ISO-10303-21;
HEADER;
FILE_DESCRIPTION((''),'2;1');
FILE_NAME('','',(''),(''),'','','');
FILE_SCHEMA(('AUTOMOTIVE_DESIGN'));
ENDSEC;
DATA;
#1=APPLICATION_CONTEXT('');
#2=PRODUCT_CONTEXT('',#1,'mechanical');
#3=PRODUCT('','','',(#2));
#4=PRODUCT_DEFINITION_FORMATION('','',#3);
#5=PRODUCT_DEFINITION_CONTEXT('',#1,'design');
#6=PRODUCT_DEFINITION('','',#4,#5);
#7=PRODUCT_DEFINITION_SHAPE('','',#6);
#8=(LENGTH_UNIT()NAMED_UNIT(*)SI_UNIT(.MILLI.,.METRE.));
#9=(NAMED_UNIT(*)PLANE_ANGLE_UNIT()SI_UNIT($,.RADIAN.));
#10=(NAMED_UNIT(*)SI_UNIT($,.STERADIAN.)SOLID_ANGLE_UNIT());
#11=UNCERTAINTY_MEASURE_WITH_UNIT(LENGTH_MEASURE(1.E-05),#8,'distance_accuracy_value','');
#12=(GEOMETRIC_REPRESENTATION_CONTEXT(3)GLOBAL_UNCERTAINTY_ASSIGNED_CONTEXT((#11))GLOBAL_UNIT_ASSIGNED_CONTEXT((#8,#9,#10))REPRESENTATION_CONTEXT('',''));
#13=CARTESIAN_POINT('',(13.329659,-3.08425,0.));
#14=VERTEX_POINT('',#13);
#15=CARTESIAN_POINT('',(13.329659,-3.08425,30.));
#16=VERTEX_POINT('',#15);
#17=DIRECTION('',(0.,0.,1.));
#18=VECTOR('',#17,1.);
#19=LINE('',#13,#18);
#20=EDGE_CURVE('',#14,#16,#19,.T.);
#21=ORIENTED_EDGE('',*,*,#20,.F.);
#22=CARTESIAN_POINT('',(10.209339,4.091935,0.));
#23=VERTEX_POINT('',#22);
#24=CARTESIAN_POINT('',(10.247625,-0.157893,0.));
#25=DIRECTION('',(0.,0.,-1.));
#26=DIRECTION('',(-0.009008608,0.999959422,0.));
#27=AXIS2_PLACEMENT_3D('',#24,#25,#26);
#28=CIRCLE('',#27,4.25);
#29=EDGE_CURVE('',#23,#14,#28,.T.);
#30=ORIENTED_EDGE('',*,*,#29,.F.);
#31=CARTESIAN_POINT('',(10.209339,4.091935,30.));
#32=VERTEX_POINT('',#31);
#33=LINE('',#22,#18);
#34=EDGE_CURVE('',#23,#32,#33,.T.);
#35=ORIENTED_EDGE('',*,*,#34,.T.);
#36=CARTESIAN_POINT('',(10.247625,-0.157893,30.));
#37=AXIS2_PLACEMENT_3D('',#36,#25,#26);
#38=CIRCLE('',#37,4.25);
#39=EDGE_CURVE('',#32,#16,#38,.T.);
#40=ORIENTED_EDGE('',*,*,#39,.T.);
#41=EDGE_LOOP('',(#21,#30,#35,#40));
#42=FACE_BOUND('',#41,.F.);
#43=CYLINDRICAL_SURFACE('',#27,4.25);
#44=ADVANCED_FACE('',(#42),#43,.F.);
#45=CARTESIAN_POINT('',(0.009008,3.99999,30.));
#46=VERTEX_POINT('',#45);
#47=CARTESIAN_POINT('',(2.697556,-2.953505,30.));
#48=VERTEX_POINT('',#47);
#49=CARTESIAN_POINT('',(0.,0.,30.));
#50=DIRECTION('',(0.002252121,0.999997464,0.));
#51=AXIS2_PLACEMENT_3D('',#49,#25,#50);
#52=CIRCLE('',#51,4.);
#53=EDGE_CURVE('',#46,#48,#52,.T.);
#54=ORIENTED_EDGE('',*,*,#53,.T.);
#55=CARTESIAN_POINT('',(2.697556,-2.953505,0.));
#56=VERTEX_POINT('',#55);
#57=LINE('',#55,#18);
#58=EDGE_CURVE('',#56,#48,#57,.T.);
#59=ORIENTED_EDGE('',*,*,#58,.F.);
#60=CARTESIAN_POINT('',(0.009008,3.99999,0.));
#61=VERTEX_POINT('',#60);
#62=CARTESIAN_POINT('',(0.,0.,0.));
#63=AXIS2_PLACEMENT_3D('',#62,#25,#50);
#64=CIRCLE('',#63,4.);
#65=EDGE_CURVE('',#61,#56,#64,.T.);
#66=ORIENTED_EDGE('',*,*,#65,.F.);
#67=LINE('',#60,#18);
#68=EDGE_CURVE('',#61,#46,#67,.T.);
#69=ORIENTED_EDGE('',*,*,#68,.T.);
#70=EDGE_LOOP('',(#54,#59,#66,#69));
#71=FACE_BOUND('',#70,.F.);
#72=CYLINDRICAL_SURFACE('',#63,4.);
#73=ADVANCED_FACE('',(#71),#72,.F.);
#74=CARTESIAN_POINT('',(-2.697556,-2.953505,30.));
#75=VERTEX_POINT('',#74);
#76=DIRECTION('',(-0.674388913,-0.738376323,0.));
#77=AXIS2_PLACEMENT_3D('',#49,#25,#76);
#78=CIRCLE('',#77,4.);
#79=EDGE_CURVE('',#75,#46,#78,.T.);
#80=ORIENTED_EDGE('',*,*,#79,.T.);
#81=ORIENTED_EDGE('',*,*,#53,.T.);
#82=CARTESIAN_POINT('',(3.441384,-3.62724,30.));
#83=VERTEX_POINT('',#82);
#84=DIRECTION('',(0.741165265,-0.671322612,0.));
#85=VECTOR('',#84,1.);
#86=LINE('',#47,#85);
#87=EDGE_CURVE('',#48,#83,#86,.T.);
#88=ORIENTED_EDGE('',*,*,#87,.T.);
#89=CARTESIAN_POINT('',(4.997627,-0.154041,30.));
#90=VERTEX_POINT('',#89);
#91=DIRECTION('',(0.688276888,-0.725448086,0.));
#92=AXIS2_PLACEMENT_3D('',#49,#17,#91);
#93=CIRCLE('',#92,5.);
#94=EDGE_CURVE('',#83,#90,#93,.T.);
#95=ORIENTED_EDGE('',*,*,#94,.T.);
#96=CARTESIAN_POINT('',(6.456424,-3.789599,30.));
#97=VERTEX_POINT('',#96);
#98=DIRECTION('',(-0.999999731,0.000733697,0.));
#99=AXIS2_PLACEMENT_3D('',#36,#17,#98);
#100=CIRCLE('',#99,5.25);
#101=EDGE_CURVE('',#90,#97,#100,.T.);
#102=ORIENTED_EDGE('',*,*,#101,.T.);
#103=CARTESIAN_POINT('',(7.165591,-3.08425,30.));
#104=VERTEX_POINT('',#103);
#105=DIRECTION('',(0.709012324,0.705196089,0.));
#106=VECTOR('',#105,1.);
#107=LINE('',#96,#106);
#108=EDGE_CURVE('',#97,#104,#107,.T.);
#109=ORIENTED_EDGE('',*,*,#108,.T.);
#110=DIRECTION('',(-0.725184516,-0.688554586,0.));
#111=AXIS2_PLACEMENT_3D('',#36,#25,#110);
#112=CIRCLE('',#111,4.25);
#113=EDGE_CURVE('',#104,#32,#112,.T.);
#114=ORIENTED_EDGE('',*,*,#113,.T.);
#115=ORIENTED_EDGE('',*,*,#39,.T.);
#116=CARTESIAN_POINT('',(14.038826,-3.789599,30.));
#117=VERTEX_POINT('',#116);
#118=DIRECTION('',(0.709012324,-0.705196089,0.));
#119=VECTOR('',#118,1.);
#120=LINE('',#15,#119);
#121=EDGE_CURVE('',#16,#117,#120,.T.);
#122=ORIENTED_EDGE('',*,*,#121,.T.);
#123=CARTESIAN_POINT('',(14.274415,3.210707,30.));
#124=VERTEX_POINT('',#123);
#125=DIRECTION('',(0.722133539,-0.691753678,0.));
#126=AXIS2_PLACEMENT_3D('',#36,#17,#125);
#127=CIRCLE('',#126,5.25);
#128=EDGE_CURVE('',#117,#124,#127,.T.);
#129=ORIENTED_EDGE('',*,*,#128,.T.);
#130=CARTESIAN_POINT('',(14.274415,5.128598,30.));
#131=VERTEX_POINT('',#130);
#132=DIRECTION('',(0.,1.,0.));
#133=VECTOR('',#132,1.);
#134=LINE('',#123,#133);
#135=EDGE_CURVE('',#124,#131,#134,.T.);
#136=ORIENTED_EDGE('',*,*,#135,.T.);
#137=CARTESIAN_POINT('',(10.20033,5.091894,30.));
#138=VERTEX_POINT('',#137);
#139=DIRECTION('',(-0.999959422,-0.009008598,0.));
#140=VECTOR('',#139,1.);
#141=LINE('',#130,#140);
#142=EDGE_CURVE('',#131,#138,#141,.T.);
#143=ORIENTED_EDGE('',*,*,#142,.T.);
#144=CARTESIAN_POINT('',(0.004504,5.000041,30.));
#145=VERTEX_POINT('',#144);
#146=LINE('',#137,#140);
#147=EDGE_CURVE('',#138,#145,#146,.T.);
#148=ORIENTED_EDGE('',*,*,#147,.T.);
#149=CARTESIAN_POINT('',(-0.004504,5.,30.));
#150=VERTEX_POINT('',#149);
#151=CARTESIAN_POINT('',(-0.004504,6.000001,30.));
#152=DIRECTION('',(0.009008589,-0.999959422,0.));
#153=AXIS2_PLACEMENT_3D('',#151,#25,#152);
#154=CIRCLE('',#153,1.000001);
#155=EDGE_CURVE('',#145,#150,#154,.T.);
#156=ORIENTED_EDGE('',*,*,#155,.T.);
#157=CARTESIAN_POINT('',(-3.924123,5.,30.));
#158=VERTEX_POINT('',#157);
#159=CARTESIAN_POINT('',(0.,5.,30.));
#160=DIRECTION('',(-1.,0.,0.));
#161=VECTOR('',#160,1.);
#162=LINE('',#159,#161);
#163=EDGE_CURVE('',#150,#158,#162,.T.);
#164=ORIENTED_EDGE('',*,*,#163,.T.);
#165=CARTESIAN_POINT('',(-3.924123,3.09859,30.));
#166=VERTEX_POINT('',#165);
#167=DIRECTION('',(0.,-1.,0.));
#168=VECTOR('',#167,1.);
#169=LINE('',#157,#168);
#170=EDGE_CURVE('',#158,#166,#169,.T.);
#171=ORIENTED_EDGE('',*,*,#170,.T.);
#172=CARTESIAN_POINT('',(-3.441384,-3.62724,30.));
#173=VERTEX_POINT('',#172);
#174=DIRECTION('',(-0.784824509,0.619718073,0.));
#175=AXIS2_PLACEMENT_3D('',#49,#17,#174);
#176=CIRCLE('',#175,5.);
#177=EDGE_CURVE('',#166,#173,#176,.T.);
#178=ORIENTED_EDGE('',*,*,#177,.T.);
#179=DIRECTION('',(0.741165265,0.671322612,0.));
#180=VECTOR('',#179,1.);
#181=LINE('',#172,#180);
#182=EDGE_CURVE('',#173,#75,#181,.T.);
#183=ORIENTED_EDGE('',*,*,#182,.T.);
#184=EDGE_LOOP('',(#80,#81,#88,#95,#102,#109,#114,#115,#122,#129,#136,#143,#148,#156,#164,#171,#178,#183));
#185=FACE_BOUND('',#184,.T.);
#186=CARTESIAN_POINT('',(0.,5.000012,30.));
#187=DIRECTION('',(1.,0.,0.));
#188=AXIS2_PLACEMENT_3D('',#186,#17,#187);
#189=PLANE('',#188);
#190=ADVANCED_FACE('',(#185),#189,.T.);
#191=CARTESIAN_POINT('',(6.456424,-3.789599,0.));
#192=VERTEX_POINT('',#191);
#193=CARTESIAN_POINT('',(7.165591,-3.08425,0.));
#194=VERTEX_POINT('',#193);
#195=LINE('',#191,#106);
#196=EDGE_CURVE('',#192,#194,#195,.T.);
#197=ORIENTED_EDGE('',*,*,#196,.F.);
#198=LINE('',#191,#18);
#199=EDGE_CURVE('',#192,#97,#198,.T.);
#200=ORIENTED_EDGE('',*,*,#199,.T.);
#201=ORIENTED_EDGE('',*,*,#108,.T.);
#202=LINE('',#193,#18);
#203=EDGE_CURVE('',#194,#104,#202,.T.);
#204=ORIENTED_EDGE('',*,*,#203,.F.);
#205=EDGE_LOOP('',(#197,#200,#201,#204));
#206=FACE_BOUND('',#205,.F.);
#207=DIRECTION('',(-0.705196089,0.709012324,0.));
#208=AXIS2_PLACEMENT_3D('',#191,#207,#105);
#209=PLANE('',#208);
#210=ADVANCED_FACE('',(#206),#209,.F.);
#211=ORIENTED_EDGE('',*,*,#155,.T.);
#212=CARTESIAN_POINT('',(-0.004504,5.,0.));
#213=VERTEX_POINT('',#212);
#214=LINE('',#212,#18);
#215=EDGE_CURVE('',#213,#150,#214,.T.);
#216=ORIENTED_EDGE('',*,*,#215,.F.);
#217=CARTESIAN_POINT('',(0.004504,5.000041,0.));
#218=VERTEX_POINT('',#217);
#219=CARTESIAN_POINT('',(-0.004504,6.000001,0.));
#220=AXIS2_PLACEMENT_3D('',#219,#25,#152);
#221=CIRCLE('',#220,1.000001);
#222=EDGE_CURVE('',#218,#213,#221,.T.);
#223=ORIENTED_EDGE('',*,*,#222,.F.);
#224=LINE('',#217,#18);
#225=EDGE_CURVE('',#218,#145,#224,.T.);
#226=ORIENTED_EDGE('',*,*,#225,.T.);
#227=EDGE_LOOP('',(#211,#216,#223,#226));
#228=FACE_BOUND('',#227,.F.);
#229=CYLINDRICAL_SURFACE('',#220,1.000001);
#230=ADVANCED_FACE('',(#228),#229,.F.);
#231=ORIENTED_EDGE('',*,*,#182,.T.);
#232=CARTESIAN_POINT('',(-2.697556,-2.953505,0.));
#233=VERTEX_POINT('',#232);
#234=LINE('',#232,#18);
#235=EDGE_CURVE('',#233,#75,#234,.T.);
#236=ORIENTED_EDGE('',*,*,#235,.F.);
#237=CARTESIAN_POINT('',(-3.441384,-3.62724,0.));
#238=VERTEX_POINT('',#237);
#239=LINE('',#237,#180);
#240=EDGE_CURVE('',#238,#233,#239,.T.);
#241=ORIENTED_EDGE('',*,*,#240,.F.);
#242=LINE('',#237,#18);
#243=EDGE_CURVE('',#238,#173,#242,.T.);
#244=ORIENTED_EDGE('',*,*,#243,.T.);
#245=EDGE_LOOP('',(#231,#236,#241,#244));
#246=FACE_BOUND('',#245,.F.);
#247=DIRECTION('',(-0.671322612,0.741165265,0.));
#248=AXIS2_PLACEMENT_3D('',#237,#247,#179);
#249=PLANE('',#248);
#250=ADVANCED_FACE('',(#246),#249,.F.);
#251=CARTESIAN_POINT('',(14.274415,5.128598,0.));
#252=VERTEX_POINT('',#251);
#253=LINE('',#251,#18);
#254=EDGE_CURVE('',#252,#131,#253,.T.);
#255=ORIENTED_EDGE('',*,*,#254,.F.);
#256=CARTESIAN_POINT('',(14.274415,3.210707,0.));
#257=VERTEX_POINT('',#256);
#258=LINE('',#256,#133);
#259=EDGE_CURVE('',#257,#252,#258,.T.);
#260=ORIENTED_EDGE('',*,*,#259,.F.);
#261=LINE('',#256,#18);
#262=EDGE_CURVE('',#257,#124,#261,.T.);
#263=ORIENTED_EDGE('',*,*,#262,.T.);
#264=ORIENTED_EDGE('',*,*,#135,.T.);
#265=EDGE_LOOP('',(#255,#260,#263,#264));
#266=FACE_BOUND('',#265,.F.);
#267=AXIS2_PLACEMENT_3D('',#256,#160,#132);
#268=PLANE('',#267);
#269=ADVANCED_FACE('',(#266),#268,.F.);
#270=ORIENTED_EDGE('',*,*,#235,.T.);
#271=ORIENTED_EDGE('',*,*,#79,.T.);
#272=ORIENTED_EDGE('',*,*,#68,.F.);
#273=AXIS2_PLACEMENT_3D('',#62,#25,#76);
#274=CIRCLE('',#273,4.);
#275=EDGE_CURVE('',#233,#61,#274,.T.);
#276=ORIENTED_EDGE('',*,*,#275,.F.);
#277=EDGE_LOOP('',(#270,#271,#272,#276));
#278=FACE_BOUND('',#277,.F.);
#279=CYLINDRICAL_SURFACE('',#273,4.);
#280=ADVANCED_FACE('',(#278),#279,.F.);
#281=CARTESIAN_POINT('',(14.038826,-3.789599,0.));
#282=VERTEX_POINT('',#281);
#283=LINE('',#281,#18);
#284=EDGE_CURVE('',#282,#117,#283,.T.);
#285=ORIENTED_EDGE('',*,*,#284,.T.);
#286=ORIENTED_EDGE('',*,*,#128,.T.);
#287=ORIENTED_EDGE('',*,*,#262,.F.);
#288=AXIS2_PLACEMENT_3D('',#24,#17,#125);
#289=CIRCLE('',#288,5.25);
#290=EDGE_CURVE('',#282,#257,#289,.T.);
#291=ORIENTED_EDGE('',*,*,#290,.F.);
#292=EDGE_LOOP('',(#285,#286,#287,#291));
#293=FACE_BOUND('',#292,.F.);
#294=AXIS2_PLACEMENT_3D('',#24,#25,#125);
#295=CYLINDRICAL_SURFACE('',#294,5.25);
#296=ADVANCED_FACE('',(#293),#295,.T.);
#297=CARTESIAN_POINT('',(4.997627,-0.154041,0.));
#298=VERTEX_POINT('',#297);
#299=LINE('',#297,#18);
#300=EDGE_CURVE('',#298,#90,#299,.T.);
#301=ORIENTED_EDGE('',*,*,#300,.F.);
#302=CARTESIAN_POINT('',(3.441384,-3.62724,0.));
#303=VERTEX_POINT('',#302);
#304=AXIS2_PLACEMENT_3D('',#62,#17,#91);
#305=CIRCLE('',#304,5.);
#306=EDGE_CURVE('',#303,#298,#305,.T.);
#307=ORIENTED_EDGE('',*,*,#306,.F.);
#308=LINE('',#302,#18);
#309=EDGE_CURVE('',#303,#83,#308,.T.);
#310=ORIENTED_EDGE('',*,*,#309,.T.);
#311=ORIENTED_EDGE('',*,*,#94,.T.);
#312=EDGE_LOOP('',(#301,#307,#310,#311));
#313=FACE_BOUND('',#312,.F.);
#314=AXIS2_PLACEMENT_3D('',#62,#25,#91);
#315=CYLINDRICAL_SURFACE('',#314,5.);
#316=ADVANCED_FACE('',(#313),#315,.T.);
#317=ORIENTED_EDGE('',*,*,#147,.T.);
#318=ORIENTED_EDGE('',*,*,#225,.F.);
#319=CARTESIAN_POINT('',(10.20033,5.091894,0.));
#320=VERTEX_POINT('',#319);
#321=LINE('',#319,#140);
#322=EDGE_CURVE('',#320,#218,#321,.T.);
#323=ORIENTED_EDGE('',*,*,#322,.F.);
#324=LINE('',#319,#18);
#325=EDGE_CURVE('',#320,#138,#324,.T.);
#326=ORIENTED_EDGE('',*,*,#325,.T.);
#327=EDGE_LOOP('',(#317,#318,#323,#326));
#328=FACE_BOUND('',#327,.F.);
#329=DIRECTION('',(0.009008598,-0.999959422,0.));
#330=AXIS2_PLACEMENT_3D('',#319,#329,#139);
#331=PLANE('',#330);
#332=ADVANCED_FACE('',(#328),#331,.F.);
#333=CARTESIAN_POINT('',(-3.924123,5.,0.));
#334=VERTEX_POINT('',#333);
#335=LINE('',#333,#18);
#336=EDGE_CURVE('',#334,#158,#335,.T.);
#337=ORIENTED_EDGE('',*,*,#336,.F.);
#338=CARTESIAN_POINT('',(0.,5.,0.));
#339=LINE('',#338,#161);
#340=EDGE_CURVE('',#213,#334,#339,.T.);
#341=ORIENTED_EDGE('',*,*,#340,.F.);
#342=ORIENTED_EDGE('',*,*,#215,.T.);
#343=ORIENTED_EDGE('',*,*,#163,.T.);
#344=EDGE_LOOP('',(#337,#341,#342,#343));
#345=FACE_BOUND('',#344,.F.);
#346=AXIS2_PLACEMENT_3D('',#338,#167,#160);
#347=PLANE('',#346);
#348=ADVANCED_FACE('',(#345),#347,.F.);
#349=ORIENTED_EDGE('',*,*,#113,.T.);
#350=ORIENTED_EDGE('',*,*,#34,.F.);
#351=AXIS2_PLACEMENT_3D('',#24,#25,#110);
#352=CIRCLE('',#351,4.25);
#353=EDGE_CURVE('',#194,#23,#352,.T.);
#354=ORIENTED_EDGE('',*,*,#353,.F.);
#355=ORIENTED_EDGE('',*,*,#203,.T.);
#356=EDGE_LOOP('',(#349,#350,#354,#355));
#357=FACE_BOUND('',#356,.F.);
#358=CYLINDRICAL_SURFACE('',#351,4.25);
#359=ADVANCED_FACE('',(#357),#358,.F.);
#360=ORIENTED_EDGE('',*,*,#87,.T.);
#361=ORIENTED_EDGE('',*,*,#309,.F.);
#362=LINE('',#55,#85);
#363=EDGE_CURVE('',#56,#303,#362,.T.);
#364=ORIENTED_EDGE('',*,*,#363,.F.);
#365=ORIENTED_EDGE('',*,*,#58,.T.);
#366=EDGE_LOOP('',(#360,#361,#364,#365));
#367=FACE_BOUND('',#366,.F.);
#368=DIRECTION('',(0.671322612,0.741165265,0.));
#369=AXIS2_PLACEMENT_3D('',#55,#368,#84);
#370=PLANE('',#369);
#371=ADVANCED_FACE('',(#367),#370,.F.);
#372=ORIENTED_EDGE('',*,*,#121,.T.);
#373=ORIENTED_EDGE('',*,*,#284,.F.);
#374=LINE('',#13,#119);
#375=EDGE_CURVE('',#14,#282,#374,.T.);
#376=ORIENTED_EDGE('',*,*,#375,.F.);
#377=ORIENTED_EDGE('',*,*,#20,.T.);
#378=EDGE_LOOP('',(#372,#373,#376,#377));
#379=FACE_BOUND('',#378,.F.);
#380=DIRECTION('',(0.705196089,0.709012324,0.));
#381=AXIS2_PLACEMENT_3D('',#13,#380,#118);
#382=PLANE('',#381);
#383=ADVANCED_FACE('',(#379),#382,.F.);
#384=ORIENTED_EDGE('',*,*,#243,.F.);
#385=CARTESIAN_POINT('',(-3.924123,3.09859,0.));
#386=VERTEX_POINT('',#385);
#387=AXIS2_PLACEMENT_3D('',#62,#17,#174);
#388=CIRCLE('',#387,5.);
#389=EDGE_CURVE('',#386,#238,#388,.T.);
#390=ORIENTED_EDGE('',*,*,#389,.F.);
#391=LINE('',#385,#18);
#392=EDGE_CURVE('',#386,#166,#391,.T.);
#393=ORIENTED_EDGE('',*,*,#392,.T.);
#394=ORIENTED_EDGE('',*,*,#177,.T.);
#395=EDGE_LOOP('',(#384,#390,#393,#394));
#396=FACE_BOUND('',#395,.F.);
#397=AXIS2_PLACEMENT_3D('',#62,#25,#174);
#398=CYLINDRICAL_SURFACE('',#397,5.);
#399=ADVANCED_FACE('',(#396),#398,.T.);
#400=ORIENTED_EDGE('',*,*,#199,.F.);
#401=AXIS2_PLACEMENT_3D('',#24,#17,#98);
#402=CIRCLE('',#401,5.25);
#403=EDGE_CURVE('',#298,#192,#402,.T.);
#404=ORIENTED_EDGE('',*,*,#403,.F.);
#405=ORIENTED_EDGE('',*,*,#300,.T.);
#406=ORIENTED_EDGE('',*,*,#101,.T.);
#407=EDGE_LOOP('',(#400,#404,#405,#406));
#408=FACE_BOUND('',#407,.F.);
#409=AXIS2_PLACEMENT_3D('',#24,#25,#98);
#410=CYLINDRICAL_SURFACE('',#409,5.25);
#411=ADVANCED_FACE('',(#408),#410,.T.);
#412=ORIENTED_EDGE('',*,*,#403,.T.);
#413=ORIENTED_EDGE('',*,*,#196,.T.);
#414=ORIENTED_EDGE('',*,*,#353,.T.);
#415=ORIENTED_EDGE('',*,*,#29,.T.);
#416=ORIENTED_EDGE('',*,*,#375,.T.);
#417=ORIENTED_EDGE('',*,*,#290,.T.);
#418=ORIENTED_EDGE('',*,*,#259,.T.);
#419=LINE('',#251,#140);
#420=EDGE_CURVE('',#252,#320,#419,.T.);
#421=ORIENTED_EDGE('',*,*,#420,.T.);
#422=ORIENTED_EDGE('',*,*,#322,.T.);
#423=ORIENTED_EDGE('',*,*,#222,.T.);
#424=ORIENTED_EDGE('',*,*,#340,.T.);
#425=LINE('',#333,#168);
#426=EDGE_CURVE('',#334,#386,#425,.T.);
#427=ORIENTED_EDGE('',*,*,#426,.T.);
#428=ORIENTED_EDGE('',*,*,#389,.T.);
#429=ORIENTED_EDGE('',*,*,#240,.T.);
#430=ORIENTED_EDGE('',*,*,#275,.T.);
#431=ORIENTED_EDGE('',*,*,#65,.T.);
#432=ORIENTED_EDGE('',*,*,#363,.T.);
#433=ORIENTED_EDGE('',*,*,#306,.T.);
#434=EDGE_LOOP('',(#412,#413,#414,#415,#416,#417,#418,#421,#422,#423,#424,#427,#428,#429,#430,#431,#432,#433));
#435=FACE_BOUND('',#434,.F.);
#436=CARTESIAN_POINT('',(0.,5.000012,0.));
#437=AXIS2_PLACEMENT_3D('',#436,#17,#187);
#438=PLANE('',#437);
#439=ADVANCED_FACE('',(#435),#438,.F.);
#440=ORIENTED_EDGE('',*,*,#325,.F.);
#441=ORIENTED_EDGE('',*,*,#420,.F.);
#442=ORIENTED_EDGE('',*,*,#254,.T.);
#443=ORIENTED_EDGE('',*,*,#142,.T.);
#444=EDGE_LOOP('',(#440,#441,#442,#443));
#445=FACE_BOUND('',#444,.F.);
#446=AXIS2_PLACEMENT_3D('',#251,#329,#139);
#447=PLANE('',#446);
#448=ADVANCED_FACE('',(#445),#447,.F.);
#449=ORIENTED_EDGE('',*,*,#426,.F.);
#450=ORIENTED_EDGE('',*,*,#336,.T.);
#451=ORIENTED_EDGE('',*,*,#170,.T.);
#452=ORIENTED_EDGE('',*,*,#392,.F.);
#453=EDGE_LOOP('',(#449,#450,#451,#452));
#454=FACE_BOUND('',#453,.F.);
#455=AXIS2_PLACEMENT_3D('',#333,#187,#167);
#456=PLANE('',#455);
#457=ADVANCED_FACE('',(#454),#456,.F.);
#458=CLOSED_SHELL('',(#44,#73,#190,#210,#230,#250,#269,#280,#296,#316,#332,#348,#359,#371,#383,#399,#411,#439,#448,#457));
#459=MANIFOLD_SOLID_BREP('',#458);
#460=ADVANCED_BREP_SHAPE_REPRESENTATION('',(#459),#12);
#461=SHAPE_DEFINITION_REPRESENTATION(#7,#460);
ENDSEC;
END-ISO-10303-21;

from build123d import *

# Parameters (mm, degrees)
F1_DEPTH    = 30
F2_T1_DEPTH = 30


# Not quite as in the source:
# - a fillet or chamfer that OpenCascade refuses, or shapes differently, is made with other operations: its cross-section is extruded or revolved along the edge and cut away or added
# - ends of sketch curves that miss each other by under 0.0002 mm in the source are joined
# - a feature names something its author has since deleted; it is built from what else it names


with BuildPart() as f1:
    # F0 (on Top) → F1 (new body)
    with BuildSketch(Plane.XY):
        with BuildLine():
            ThreePointArc((0.0090084839, 3.9999898559), (3.7308371777, 1.442516535), (2.6975556514, -2.9535052916))
            Line((2.6975556514, -2.9535052916), (3.4413844377, -3.6272404321))
            ThreePointArc((3.4413844377, -3.6272404321), (4.562894469, -2.0445033784), (4.9976265844, -0.1540406522))
            ThreePointArc((4.9976265844, -0.1540406522), (4.9982482299, -0.0770116198), (5, 0))
            ThreePointArc((5, 0), (4.4620948533, 2.2560384571), (2.964116192, 4.0266630354))
            Line((2.964116192, 4.0266630354), (0.0090084839, 3.9999898559))
        make_face()
        with BuildLine():
            ThreePointArc((-2.6975556514, -2.9535052916), (-3.7275789944, 1.4509151734), (0.0090084839, 3.9999898559))
            Line((0.0090084839, 3.9999898559), (2.964116192, 4.0266630354))
            ThreePointArc((2.964116192, 4.0266630354), (1.5599174374, 4.7504376207), (0, 5))
            ThreePointArc((0, 5), (-2.1802578035, 4.4996084175), (-3.9241225459, 3.0985903642))
            ThreePointArc((-3.9241225459, 3.0985903642), (-4.9871708669, -0.3579479625), (-3.4413844377, -3.6272404321))
            Line((-3.4413844377, -3.6272404321), (-2.6975556514, -2.9535052916))
        make_face()
        with BuildLine():
            ThreePointArc((0, 5), (1.5599174374, 4.7504376207), (2.964116192, 4.0266630354))
            Line((2.964116192, 4.0266630354), (7.1272566982, 4.0641686172))
            ThreePointArc((7.1272566982, 4.0641686172), (8.5825190892, 4.8210552933), (10.200330031, 5.0918944033))
            Line((10.200330031, 5.0918944033), (0, 5))
        make_face()
        with BuildLine():
            ThreePointArc((5, 0), (4.9982482299, -0.0770116198), (4.9976265844, -0.1540406522))
            ThreePointArc((4.9976265844, -0.1540406522), (4.9994066109, -0.0770294678), (5, 0))
        make_face()
        with BuildLine():
            ThreePointArc((5, 0), (4.9994066109, -0.0770294678), (4.9976265844, -0.1540406522))
            ThreePointArc((4.9976265844, -0.1540406522), (5.3752392401, -2.1129770441), (6.4564240892, -3.7895993711))
            Line((6.4564240892, -3.7895993711), (7.1655909773, -3.0842495499))
            ThreePointArc((7.1655909773, -3.0842495499), (6.3350165087, 1.5016234688), (10.2093385862, 4.0919349811))
            Line((10.2093385862, 4.0919349811), (7.1272566982, 4.0641686172))
            ThreePointArc((7.1272566982, 4.0641686172), (5.5962602055, 2.2767129418), (5, 0))
        make_face()
        with BuildLine():
            ThreePointArc((-3.9241225459, 3.0985903642), (-2.1802578035, 4.4996084175), (0, 5))
            Line((0, 5), (-3.9241225459, 5))
            Line((-3.9241225459, 5), (-3.9241225459, 3.0985903642))
        make_face()
        with BuildLine():
            ThreePointArc((10.200330031, 5.0918944033), (8.5825190892, 4.8210552933), (7.1272566982, 4.0641686172))
            Line((7.1272566982, 4.0641686172), (10.2093385862, 4.0919349811))
            Line((10.2093385862, 4.0919349811), (13.2914205601, 4.1197013458))
            ThreePointArc((13.2914205601, 4.1197013458), (11.8227579499, 4.8502464877), (10.200330031, 5.0918944033))
        make_face()
        with BuildLine():
            Line((14.2744146958, 5.1285976842), (10.200330031, 5.0918944033))
            ThreePointArc((10.200330031, 5.0918944033), (11.8227579499, 4.8502464877), (13.2914205601, 4.1197013458))
            ThreePointArc((13.2914205601, 4.1197013458), (13.8120129481, 3.6966683449), (14.2744146958, 3.2107074637))
            Line((14.2744146958, 3.2107074637), (14.2744146958, 5.1285976842))
        make_face()
        with BuildLine():
            Line((13.2914205601, 4.1197013458), (10.2093385862, 4.0919349811))
            ThreePointArc((10.2093385862, 4.0919349811), (14.145125137, 1.5368032872), (13.3296593654, -3.0842495499))
            Line((13.3296593654, -3.0842495499), (14.0388262535, -3.7895993711))
            ThreePointArc((14.0388262535, -3.7895993711), (15.4946546383, -0.3344761776), (14.2744146958, 3.2107074637))
            ThreePointArc((14.2744146958, 3.2107074637), (13.8120129481, 3.6966683449), (13.2914205601, 4.1197013458))
        make_face()
        with BuildLine():
            Line((7.1272566982, 4.0641686172), (2.964116192, 4.0266630354))
            ThreePointArc((2.964116192, 4.0266630354), (4.4620948533, 2.2560384571), (5, 0))
            ThreePointArc((5, 0), (5.5962602055, 2.2767129418), (7.1272566982, 4.0641686172))
        make_face()
    extrude(amount=F1_DEPTH)

    # F2: fillet of radius 1 on 1 edges, made by hand

    # F2_s2 → F2_t1 (join)
    with BuildSketch(Plane.XY):
        with BuildLine():
            ThreePointArc((0.0045042077, 5.0000405782), (-4.57e-08, 5.0000101446), (-0.0045043905, 5))
            Line((-0.0045043905, 5), (0, 5))
            Line((0, 5), (0.0045042077, 5.0000405782))
        make_face()
    extrude(amount=F2_T1_DEPTH)


solid = f1.part
